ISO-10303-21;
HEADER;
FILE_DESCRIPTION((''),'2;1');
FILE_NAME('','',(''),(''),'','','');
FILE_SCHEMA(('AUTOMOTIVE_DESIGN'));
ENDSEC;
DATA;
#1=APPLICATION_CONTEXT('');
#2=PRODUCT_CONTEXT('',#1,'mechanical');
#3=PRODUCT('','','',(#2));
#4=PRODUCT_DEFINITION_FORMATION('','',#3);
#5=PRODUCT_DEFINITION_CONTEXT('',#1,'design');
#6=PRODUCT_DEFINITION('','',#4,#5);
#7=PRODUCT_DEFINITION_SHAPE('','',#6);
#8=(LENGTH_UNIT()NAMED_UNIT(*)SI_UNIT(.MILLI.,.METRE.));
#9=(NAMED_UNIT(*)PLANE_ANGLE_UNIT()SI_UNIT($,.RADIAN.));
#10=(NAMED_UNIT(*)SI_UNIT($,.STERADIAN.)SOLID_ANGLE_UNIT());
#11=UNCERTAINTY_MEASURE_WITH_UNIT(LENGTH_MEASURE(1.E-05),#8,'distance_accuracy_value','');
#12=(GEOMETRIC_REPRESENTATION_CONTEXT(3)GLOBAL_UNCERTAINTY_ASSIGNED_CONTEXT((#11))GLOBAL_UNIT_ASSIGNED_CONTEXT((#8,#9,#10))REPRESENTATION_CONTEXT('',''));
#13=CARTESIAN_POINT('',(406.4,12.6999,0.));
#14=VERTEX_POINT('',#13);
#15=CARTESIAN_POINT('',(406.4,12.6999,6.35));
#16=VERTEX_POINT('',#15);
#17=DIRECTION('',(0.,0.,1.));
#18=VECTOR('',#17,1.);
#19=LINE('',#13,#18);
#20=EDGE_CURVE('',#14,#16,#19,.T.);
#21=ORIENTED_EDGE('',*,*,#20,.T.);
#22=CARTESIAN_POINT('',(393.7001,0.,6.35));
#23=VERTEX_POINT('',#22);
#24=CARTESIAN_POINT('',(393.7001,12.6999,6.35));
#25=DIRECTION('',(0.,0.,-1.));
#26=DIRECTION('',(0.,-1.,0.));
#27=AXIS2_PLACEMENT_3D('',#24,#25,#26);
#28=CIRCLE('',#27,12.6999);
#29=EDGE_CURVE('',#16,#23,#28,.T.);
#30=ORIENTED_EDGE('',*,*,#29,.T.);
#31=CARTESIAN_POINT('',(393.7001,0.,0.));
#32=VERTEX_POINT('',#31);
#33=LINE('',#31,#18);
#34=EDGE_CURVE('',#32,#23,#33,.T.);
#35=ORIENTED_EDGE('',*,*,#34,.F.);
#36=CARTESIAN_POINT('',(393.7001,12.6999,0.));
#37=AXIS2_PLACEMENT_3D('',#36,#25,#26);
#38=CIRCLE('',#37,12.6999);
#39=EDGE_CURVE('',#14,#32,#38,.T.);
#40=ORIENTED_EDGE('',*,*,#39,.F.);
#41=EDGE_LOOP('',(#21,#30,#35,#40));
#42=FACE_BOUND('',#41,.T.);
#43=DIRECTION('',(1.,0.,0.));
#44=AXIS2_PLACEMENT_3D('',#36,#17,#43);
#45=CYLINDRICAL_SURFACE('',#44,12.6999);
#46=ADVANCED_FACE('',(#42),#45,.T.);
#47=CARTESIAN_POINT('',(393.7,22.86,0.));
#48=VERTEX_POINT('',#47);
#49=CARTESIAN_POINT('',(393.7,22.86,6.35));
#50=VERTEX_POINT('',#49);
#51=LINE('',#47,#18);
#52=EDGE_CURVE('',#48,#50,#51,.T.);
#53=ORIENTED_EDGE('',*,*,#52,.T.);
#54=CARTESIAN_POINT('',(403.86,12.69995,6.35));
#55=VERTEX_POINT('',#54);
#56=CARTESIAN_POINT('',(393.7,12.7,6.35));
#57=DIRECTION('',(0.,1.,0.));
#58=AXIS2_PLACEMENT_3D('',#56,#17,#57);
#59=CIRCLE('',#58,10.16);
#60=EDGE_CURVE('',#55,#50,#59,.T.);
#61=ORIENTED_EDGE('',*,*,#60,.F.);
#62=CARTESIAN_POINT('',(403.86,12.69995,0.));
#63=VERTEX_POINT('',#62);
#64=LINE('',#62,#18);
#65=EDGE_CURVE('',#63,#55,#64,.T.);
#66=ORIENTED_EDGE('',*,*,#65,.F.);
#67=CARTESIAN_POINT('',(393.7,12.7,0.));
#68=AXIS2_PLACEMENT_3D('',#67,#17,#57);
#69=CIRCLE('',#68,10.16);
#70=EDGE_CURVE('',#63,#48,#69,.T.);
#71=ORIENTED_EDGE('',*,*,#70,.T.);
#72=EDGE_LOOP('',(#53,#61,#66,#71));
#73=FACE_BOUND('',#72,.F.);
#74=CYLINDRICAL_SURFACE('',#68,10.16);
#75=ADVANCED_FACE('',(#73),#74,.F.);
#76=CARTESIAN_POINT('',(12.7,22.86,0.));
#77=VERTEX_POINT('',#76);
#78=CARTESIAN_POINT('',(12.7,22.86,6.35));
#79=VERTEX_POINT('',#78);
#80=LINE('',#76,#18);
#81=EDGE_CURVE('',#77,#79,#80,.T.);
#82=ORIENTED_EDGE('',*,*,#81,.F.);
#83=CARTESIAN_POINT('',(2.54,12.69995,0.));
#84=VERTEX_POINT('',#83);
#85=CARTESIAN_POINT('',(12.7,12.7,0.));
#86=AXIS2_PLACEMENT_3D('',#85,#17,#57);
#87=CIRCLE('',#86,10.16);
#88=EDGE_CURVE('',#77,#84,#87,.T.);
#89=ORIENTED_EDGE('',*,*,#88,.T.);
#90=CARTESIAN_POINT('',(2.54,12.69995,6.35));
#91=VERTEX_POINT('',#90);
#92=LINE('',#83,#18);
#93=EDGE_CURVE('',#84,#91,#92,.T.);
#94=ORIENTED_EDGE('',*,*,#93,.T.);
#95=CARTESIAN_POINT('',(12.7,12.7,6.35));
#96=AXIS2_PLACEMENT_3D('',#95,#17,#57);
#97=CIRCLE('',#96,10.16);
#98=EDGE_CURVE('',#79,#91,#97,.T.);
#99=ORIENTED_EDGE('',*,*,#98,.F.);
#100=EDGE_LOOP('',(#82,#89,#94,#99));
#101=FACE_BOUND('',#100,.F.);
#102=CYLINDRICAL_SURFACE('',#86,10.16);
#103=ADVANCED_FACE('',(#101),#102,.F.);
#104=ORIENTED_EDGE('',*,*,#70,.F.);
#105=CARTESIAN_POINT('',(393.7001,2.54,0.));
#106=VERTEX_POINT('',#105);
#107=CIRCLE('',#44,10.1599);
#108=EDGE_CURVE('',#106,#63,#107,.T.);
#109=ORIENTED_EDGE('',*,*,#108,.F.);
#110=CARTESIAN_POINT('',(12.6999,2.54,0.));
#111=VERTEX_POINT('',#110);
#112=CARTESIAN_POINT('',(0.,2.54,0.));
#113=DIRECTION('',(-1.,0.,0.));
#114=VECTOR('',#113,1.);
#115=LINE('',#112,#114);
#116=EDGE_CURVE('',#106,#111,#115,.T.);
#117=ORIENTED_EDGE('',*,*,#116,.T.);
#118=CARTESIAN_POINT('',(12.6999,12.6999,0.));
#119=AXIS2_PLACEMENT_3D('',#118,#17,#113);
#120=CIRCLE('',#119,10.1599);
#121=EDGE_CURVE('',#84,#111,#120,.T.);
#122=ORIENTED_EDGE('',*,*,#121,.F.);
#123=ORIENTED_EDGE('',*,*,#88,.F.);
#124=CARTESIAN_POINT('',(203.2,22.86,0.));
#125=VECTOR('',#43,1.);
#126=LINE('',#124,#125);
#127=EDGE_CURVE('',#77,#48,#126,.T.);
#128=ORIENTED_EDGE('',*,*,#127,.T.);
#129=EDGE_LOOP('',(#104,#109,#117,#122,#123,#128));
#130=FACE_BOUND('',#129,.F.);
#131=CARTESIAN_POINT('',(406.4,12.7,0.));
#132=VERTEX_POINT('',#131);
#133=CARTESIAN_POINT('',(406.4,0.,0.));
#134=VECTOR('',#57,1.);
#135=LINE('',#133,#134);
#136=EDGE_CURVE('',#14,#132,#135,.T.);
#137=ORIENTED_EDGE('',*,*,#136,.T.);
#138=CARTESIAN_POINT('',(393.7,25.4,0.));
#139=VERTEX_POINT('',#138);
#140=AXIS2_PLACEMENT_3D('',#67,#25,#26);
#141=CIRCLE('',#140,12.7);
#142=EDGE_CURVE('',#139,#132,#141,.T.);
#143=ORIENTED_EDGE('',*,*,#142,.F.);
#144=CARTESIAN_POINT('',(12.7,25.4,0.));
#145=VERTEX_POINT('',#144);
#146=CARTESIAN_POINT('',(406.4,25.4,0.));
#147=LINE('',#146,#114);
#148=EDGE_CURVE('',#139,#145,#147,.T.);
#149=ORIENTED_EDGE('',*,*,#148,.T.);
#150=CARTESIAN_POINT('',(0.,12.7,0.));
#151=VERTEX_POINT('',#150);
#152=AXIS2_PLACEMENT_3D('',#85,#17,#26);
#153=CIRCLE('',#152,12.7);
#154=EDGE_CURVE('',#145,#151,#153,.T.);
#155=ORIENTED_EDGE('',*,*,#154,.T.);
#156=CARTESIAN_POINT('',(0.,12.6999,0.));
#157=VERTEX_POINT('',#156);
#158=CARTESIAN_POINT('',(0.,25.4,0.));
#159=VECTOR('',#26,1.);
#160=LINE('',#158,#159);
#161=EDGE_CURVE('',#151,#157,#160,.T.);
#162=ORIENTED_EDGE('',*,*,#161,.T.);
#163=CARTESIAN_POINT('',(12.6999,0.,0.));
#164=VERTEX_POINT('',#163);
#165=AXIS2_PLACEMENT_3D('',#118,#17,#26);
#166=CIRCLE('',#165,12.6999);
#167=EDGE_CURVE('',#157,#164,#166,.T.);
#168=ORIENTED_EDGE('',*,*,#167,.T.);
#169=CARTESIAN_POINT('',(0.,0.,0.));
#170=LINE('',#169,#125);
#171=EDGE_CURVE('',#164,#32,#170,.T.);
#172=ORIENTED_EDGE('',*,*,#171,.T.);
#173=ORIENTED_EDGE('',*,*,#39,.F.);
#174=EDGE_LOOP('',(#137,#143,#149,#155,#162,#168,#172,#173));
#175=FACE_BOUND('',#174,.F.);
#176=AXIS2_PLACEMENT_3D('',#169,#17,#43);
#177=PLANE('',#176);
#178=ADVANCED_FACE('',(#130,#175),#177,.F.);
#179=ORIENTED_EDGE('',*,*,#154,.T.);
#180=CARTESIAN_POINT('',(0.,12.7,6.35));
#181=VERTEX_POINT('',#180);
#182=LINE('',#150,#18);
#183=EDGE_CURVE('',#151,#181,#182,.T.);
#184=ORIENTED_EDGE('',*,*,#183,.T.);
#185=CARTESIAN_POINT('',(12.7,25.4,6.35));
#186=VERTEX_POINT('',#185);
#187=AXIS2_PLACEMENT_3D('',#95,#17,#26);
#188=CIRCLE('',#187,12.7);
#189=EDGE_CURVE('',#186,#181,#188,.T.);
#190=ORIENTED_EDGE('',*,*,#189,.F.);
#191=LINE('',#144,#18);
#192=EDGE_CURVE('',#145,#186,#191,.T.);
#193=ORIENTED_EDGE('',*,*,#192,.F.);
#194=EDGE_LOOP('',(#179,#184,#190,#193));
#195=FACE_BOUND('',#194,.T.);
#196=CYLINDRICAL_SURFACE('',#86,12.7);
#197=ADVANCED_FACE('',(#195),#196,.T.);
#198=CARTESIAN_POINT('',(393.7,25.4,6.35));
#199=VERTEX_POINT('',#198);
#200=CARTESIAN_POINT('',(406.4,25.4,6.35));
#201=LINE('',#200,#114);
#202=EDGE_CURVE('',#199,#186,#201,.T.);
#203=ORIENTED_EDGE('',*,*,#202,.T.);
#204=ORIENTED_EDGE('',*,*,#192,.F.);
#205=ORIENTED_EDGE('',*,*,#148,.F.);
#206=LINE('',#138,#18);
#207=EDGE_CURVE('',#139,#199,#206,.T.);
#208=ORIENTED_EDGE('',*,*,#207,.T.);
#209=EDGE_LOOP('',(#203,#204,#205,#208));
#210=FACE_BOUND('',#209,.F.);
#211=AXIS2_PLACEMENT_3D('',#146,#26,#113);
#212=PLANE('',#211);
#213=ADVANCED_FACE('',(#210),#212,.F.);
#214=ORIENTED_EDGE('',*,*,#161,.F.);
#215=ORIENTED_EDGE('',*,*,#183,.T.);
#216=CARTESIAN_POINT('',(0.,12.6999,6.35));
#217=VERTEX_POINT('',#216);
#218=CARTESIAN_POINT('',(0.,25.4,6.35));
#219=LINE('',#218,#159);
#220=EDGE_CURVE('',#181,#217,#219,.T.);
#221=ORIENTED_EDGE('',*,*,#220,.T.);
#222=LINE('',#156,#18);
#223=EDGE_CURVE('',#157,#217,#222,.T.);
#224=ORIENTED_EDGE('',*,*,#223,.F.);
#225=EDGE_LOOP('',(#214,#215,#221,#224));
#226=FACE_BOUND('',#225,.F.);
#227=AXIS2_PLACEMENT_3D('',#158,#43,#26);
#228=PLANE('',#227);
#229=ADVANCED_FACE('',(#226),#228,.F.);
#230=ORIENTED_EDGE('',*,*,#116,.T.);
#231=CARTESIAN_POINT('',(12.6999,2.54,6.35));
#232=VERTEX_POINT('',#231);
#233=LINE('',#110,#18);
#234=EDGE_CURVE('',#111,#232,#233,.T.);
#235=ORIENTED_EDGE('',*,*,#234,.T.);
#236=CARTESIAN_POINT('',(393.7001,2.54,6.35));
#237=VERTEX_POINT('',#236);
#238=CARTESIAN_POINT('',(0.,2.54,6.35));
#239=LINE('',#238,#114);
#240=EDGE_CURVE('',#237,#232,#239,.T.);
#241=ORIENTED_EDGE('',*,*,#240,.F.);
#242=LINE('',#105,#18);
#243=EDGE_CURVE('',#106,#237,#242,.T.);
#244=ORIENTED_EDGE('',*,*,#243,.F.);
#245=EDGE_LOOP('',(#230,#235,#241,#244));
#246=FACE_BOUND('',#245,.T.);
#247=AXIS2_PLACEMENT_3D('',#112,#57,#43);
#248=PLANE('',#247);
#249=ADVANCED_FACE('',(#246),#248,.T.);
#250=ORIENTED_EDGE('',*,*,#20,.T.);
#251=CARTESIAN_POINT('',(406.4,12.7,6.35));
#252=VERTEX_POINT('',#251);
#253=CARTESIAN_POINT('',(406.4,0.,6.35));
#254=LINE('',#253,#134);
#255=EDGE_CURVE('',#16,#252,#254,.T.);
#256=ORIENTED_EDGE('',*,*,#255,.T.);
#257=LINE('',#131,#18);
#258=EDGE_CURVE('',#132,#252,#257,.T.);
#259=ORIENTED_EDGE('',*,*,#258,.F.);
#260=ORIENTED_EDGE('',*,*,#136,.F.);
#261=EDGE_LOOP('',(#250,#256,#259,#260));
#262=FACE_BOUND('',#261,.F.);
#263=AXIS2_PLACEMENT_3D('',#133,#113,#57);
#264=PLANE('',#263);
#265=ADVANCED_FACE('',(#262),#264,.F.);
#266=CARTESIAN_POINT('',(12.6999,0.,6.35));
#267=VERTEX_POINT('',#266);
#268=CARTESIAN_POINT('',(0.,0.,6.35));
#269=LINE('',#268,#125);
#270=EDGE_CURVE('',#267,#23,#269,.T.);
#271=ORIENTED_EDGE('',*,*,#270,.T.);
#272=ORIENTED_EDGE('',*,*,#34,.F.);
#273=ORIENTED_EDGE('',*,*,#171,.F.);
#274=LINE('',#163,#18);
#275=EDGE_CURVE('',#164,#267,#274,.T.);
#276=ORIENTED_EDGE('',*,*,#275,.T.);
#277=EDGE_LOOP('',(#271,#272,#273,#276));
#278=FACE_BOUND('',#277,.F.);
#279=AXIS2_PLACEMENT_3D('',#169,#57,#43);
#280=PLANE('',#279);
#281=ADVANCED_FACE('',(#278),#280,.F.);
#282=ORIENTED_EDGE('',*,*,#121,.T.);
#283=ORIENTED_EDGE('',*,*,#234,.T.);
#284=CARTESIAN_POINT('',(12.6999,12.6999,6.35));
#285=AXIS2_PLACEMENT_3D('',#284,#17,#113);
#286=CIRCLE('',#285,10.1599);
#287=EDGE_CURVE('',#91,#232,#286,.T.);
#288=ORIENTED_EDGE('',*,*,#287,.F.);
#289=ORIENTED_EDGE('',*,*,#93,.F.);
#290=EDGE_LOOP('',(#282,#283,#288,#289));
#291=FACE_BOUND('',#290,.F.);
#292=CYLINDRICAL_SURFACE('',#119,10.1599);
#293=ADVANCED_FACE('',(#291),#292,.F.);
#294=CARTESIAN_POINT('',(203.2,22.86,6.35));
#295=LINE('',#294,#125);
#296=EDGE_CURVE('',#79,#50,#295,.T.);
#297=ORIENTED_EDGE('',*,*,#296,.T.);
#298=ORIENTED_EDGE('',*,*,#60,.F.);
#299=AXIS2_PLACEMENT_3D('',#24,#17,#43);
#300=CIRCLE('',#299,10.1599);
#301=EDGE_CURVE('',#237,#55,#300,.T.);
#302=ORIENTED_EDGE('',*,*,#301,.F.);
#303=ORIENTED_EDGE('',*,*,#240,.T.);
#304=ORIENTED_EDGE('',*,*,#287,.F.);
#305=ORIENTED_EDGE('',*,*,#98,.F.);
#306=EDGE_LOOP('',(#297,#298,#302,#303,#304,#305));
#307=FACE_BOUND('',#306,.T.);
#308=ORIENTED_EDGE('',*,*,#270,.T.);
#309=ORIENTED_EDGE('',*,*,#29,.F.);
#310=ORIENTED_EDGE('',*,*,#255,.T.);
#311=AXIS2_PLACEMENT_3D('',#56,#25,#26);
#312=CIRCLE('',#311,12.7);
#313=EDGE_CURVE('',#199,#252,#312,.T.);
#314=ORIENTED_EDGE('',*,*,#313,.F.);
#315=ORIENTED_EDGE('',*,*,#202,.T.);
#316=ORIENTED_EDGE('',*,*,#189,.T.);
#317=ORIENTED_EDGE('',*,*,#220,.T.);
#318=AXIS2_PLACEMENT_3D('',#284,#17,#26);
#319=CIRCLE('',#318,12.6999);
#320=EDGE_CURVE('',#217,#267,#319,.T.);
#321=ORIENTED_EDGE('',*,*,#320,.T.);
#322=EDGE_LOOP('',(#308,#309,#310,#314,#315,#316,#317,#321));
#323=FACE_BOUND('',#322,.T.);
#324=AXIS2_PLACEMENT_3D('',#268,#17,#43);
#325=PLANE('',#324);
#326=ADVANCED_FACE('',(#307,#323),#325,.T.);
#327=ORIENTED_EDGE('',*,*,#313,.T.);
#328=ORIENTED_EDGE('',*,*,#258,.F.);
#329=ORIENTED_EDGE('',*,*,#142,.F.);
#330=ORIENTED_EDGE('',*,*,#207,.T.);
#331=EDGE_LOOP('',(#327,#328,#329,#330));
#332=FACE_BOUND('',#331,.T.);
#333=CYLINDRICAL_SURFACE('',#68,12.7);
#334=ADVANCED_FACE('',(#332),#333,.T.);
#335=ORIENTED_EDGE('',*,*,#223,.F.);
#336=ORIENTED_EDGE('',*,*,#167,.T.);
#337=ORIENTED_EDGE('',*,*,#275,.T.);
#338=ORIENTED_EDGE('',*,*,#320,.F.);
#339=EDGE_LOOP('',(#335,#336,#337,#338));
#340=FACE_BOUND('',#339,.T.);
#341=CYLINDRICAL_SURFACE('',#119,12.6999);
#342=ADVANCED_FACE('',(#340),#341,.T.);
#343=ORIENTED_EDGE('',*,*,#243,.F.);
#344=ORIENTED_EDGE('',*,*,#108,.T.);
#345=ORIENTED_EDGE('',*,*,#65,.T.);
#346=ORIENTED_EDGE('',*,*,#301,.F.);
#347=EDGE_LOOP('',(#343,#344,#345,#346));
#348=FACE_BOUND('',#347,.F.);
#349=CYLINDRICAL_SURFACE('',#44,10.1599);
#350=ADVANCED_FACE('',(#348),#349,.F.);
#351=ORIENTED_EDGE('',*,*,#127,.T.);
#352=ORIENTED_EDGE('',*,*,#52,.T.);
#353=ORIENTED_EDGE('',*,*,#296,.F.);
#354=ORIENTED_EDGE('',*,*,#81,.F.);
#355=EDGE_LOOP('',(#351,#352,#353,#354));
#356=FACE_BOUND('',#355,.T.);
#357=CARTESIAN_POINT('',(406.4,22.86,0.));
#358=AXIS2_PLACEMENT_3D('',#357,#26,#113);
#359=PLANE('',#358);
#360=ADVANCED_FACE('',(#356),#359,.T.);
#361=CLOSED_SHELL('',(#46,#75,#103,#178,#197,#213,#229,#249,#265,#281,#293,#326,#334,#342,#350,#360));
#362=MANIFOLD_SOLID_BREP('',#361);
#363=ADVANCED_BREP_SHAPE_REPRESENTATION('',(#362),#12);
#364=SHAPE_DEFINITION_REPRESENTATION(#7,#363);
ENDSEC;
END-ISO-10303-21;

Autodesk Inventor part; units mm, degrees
ref_plane "YZ Plane" through (0, 0, 0) normal (1, 0, 0) x (0, 1, 0)
ref_plane "XZ Plane" through (0, 0, 0) normal (0, 1, 0) x (-1, 0, 0)
ref_plane "XY Plane" through (0, 0, 0) normal (0, 0, 1) x (1, 0, 0)
sketch "Sketch1" plane through (0, 0, 0) normal (0, 0, 1) x (1, 0, 0)
  line L0 (0, 0) -> (406.4, 0)
  line L1 (406.4, 0) -> (406.4, 25.4)
  line L2 (406.4, 25.4) -> (0, 25.4)
  line L3 (0, 25.4) -> (0, 0)
  dimension "d0" = 406.4
  dimension "d1" = 25.4
extrude "Extrusion1" add sketch "Sketch1" along normal blind 6.35
fillet "Fillet1" radius 12.7 1 edges at (406.4, 25.4, 3.175)
fillet "Fillet2" radius 12.7 1 edges at (406.4, 0, 3.175)
fillet "Fillet3" radius 12.7 1 edges at (0, 25.4, 3.175)
fillet "Fillet4" radius 12.7 1 edges at (0, 0, 3.175)
shell "Shell1" thickness 2.54 removed faces 2 at (266.7, 8.4667, 6.35) at (266.7, 8.4667, 0)
properties part number "16inchliftwire"
